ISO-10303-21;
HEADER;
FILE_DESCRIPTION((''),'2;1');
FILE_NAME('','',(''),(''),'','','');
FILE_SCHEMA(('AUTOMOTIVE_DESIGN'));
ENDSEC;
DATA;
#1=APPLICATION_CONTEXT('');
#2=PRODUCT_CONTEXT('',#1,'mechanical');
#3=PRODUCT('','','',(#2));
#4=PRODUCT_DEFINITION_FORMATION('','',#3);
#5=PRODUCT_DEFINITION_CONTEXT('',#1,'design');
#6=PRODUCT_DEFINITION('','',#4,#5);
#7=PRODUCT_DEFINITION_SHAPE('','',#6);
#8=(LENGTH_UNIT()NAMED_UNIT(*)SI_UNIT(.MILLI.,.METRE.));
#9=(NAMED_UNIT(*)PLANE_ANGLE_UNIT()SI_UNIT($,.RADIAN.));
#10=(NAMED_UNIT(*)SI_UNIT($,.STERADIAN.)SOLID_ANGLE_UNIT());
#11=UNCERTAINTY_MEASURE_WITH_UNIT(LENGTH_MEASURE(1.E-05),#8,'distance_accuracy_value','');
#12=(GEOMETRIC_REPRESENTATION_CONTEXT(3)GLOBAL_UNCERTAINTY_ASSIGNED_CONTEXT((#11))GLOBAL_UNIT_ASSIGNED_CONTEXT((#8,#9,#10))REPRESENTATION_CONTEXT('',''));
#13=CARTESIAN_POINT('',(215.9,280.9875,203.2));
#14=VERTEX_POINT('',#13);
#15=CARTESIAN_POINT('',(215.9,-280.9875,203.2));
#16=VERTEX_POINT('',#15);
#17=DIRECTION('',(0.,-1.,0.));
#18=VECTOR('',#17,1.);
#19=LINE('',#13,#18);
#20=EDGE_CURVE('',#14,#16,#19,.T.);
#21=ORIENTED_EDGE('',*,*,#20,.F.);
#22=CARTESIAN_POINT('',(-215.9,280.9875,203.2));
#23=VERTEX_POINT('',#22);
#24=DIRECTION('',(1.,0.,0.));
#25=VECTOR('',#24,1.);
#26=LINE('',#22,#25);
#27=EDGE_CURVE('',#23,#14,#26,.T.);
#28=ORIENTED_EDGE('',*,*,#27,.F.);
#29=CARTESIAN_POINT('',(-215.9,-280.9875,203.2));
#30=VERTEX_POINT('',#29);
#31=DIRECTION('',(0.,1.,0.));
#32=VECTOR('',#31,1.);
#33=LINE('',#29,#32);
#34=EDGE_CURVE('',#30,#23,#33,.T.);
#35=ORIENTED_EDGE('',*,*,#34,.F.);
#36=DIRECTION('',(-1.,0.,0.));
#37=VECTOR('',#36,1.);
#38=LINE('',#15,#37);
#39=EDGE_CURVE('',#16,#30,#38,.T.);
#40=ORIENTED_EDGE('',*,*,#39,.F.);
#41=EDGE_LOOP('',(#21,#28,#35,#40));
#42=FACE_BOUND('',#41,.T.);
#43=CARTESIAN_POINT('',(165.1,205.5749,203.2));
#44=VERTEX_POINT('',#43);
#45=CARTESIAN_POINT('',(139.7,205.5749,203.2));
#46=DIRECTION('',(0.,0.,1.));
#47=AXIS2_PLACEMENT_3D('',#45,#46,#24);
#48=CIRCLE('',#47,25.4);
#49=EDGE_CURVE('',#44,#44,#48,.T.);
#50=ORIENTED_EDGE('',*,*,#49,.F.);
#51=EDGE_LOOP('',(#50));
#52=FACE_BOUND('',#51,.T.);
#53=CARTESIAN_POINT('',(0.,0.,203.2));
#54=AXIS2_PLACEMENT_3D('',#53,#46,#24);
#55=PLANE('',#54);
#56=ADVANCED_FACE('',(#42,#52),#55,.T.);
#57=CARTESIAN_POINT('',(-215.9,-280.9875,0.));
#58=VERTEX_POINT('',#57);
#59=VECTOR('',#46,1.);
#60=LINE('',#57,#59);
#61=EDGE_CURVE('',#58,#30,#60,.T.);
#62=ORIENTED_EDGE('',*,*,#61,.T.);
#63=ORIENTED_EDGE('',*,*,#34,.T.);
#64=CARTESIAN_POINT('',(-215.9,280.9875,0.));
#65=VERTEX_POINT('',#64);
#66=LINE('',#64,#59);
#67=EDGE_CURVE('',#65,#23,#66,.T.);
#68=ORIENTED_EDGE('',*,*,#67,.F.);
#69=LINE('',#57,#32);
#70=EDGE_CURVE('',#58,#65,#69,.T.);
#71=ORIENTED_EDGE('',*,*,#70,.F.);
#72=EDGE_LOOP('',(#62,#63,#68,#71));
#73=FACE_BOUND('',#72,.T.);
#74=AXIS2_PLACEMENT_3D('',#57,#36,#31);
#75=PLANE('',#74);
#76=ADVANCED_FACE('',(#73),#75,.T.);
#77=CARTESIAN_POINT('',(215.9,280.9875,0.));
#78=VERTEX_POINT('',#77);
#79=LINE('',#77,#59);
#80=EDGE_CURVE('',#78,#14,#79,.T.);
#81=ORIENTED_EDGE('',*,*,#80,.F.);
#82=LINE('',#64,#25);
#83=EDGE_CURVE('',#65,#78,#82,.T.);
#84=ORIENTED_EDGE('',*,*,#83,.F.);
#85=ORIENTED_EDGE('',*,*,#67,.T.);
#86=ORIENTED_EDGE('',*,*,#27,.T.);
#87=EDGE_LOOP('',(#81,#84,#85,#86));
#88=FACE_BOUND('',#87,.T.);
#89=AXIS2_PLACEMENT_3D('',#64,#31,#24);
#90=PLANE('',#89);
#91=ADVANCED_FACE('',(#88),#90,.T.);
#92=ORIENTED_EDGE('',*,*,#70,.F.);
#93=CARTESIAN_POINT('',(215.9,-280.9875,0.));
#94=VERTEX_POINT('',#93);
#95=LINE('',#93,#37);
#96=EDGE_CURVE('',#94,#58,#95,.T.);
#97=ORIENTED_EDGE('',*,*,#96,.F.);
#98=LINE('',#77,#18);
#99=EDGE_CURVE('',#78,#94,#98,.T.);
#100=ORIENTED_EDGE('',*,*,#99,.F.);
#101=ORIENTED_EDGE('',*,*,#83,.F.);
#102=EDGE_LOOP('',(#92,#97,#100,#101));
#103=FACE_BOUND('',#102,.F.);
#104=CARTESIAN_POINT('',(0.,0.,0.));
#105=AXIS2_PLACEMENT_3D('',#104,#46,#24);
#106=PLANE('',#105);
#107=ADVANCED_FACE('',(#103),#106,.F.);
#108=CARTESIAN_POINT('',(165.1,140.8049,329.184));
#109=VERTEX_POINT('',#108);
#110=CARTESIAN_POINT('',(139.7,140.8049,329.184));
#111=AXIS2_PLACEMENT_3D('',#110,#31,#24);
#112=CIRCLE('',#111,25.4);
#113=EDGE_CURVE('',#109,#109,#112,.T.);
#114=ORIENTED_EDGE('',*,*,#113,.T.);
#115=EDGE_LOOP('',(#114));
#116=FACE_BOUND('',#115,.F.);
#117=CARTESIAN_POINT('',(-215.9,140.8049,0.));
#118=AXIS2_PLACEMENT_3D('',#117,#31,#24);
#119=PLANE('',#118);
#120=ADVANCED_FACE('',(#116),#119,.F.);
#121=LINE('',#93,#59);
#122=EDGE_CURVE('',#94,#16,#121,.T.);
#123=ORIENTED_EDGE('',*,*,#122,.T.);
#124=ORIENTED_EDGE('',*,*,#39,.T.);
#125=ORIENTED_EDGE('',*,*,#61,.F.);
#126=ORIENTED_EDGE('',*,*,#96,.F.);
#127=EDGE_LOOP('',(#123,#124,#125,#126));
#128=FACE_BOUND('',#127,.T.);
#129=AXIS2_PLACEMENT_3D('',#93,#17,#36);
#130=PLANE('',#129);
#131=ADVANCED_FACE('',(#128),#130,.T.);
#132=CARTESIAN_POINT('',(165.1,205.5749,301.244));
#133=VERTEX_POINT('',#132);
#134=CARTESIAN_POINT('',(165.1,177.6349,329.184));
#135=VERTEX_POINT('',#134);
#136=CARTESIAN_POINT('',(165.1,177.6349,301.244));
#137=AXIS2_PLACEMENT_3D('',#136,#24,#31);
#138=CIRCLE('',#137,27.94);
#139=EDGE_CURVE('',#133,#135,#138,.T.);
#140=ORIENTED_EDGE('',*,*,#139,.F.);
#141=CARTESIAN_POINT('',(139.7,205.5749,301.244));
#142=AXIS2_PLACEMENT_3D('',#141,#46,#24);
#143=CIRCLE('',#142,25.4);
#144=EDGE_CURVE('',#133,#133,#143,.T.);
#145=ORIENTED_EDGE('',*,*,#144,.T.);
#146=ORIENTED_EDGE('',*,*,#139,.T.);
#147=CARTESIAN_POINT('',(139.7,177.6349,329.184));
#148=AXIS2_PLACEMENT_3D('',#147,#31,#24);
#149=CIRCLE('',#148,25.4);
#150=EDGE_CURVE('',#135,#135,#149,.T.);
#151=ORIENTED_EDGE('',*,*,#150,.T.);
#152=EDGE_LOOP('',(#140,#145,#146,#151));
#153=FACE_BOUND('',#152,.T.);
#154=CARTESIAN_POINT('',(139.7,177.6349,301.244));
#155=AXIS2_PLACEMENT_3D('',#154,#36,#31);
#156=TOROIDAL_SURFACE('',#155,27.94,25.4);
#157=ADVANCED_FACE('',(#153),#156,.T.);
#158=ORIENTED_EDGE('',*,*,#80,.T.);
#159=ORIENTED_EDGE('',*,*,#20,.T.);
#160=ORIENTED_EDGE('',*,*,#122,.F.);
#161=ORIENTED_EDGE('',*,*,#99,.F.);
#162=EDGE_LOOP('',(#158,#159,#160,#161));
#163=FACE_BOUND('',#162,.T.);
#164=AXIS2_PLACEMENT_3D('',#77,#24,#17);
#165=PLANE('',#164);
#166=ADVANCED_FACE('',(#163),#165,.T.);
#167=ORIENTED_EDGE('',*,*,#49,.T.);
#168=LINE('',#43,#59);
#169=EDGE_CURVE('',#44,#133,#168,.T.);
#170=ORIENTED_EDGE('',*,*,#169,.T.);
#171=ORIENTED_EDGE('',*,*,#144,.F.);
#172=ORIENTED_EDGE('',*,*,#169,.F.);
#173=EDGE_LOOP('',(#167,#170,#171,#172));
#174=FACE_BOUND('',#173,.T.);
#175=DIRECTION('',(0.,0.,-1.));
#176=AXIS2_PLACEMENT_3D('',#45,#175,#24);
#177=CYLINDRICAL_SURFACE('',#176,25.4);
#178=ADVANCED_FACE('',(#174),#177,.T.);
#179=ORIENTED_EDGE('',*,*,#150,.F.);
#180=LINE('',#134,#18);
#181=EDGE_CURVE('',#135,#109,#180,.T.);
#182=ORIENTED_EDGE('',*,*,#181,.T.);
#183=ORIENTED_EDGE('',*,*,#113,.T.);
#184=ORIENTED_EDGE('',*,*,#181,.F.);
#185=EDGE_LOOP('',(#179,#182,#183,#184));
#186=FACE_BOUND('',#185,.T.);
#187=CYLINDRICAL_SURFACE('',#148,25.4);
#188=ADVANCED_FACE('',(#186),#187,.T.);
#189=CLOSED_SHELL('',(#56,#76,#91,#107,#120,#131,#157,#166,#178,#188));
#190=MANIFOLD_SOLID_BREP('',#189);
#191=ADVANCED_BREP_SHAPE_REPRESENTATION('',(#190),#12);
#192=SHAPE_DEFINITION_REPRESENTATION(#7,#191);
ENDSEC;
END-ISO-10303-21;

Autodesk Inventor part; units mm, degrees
ref_plane "YZ Plane" through (0, 0, 0) normal (1, 0, 0) x (0, 1, 0)
sketch "Sketch1" plane through (0, 0, 0) normal (0, 0, 1) x (1, 0, 0)
  line L0 (215.9, -280.9875) -> (-215.9, -280.9875)
  line L1 (-215.9, -280.9875) -> (-215.9, 280.9875)
  line L2 (-215.9, 280.9875) -> (215.9, 280.9875)
  line L3 (215.9, 280.9875) -> (215.9, -280.9875)
  line L4 (215.9, -280.9875) -> (-215.9, 280.9875) construction
  line L5 (-215.9, -280.9875) -> (215.9, 280.9875) construction
  point P0 (0, 0)
  dimension "d0" = 431.8
  dimension "d1" = 561.975
extrude "Extrusion1" add sketch "Sketch1" along normal blind 203.2
sketch "Sketch2" plane through (0, 0, 203.2) normal (0, 0, 1) x (1, 0, 0)
  circle A0 centre (139.7, 205.5749) radius 25.4
  line L0 (-215.9, -280.9875) -> (215.9, -280.9875) projected
  line L1 (215.9, -280.9875) -> (215.9, 280.9875) projected
  point P0 (0, 0)
  dimension "d4" = 50.8
  dimension "d5" = 486.5624
  dimension "d6" = 76.2
extrude "Extrusion2" add sketch "Sketch2" along normal blind 98.044
ref_plane "Work Plane1" through (-215.9, 177.6349, 0) normal (0, 1, 0) x (1, 0, 0)
sketch "Sketch3" plane through (-215.9, 177.6349, 0) normal (0, 1, 0) x (1, 0, 0)
  circle A0 centre (355.6, -329.184) radius 25.4
  line L0 (330.2, -301.244) -> (381, -301.244) projected
  point P0 (215.9, 0)
  dimension "d16" = 27.94
extrude "Extrusion3" add sketch "Sketch3" against normal blind 36.83
ref_plane "Work Plane2" through (139.7, -280.9875, 0) normal (1, 0, 0) x (0, 0, -1)
sketch "Sketch5" plane through (0, 0, 301.244) normal (0, 0, 1) x (1, 0, 0)
  circle A0 centre (139.7, 205.5749) radius 25.4 projected
  circle A1 centre (139.7, 205.5749) radius 25.4
  line L0 (165.1, 177.6349) -> (114.3, 177.6349) projected
  line L1 (114.3, 177.6349) -> (165.1, 177.6349)
  point P0 (0, 0)
revolve "Revolution1" add sketch "Sketch5" angle 90 about axis through (165.1, 177.6349, 301.244) along (1, 0, 0)
properties part number "Sump_1SDB_Tub"
